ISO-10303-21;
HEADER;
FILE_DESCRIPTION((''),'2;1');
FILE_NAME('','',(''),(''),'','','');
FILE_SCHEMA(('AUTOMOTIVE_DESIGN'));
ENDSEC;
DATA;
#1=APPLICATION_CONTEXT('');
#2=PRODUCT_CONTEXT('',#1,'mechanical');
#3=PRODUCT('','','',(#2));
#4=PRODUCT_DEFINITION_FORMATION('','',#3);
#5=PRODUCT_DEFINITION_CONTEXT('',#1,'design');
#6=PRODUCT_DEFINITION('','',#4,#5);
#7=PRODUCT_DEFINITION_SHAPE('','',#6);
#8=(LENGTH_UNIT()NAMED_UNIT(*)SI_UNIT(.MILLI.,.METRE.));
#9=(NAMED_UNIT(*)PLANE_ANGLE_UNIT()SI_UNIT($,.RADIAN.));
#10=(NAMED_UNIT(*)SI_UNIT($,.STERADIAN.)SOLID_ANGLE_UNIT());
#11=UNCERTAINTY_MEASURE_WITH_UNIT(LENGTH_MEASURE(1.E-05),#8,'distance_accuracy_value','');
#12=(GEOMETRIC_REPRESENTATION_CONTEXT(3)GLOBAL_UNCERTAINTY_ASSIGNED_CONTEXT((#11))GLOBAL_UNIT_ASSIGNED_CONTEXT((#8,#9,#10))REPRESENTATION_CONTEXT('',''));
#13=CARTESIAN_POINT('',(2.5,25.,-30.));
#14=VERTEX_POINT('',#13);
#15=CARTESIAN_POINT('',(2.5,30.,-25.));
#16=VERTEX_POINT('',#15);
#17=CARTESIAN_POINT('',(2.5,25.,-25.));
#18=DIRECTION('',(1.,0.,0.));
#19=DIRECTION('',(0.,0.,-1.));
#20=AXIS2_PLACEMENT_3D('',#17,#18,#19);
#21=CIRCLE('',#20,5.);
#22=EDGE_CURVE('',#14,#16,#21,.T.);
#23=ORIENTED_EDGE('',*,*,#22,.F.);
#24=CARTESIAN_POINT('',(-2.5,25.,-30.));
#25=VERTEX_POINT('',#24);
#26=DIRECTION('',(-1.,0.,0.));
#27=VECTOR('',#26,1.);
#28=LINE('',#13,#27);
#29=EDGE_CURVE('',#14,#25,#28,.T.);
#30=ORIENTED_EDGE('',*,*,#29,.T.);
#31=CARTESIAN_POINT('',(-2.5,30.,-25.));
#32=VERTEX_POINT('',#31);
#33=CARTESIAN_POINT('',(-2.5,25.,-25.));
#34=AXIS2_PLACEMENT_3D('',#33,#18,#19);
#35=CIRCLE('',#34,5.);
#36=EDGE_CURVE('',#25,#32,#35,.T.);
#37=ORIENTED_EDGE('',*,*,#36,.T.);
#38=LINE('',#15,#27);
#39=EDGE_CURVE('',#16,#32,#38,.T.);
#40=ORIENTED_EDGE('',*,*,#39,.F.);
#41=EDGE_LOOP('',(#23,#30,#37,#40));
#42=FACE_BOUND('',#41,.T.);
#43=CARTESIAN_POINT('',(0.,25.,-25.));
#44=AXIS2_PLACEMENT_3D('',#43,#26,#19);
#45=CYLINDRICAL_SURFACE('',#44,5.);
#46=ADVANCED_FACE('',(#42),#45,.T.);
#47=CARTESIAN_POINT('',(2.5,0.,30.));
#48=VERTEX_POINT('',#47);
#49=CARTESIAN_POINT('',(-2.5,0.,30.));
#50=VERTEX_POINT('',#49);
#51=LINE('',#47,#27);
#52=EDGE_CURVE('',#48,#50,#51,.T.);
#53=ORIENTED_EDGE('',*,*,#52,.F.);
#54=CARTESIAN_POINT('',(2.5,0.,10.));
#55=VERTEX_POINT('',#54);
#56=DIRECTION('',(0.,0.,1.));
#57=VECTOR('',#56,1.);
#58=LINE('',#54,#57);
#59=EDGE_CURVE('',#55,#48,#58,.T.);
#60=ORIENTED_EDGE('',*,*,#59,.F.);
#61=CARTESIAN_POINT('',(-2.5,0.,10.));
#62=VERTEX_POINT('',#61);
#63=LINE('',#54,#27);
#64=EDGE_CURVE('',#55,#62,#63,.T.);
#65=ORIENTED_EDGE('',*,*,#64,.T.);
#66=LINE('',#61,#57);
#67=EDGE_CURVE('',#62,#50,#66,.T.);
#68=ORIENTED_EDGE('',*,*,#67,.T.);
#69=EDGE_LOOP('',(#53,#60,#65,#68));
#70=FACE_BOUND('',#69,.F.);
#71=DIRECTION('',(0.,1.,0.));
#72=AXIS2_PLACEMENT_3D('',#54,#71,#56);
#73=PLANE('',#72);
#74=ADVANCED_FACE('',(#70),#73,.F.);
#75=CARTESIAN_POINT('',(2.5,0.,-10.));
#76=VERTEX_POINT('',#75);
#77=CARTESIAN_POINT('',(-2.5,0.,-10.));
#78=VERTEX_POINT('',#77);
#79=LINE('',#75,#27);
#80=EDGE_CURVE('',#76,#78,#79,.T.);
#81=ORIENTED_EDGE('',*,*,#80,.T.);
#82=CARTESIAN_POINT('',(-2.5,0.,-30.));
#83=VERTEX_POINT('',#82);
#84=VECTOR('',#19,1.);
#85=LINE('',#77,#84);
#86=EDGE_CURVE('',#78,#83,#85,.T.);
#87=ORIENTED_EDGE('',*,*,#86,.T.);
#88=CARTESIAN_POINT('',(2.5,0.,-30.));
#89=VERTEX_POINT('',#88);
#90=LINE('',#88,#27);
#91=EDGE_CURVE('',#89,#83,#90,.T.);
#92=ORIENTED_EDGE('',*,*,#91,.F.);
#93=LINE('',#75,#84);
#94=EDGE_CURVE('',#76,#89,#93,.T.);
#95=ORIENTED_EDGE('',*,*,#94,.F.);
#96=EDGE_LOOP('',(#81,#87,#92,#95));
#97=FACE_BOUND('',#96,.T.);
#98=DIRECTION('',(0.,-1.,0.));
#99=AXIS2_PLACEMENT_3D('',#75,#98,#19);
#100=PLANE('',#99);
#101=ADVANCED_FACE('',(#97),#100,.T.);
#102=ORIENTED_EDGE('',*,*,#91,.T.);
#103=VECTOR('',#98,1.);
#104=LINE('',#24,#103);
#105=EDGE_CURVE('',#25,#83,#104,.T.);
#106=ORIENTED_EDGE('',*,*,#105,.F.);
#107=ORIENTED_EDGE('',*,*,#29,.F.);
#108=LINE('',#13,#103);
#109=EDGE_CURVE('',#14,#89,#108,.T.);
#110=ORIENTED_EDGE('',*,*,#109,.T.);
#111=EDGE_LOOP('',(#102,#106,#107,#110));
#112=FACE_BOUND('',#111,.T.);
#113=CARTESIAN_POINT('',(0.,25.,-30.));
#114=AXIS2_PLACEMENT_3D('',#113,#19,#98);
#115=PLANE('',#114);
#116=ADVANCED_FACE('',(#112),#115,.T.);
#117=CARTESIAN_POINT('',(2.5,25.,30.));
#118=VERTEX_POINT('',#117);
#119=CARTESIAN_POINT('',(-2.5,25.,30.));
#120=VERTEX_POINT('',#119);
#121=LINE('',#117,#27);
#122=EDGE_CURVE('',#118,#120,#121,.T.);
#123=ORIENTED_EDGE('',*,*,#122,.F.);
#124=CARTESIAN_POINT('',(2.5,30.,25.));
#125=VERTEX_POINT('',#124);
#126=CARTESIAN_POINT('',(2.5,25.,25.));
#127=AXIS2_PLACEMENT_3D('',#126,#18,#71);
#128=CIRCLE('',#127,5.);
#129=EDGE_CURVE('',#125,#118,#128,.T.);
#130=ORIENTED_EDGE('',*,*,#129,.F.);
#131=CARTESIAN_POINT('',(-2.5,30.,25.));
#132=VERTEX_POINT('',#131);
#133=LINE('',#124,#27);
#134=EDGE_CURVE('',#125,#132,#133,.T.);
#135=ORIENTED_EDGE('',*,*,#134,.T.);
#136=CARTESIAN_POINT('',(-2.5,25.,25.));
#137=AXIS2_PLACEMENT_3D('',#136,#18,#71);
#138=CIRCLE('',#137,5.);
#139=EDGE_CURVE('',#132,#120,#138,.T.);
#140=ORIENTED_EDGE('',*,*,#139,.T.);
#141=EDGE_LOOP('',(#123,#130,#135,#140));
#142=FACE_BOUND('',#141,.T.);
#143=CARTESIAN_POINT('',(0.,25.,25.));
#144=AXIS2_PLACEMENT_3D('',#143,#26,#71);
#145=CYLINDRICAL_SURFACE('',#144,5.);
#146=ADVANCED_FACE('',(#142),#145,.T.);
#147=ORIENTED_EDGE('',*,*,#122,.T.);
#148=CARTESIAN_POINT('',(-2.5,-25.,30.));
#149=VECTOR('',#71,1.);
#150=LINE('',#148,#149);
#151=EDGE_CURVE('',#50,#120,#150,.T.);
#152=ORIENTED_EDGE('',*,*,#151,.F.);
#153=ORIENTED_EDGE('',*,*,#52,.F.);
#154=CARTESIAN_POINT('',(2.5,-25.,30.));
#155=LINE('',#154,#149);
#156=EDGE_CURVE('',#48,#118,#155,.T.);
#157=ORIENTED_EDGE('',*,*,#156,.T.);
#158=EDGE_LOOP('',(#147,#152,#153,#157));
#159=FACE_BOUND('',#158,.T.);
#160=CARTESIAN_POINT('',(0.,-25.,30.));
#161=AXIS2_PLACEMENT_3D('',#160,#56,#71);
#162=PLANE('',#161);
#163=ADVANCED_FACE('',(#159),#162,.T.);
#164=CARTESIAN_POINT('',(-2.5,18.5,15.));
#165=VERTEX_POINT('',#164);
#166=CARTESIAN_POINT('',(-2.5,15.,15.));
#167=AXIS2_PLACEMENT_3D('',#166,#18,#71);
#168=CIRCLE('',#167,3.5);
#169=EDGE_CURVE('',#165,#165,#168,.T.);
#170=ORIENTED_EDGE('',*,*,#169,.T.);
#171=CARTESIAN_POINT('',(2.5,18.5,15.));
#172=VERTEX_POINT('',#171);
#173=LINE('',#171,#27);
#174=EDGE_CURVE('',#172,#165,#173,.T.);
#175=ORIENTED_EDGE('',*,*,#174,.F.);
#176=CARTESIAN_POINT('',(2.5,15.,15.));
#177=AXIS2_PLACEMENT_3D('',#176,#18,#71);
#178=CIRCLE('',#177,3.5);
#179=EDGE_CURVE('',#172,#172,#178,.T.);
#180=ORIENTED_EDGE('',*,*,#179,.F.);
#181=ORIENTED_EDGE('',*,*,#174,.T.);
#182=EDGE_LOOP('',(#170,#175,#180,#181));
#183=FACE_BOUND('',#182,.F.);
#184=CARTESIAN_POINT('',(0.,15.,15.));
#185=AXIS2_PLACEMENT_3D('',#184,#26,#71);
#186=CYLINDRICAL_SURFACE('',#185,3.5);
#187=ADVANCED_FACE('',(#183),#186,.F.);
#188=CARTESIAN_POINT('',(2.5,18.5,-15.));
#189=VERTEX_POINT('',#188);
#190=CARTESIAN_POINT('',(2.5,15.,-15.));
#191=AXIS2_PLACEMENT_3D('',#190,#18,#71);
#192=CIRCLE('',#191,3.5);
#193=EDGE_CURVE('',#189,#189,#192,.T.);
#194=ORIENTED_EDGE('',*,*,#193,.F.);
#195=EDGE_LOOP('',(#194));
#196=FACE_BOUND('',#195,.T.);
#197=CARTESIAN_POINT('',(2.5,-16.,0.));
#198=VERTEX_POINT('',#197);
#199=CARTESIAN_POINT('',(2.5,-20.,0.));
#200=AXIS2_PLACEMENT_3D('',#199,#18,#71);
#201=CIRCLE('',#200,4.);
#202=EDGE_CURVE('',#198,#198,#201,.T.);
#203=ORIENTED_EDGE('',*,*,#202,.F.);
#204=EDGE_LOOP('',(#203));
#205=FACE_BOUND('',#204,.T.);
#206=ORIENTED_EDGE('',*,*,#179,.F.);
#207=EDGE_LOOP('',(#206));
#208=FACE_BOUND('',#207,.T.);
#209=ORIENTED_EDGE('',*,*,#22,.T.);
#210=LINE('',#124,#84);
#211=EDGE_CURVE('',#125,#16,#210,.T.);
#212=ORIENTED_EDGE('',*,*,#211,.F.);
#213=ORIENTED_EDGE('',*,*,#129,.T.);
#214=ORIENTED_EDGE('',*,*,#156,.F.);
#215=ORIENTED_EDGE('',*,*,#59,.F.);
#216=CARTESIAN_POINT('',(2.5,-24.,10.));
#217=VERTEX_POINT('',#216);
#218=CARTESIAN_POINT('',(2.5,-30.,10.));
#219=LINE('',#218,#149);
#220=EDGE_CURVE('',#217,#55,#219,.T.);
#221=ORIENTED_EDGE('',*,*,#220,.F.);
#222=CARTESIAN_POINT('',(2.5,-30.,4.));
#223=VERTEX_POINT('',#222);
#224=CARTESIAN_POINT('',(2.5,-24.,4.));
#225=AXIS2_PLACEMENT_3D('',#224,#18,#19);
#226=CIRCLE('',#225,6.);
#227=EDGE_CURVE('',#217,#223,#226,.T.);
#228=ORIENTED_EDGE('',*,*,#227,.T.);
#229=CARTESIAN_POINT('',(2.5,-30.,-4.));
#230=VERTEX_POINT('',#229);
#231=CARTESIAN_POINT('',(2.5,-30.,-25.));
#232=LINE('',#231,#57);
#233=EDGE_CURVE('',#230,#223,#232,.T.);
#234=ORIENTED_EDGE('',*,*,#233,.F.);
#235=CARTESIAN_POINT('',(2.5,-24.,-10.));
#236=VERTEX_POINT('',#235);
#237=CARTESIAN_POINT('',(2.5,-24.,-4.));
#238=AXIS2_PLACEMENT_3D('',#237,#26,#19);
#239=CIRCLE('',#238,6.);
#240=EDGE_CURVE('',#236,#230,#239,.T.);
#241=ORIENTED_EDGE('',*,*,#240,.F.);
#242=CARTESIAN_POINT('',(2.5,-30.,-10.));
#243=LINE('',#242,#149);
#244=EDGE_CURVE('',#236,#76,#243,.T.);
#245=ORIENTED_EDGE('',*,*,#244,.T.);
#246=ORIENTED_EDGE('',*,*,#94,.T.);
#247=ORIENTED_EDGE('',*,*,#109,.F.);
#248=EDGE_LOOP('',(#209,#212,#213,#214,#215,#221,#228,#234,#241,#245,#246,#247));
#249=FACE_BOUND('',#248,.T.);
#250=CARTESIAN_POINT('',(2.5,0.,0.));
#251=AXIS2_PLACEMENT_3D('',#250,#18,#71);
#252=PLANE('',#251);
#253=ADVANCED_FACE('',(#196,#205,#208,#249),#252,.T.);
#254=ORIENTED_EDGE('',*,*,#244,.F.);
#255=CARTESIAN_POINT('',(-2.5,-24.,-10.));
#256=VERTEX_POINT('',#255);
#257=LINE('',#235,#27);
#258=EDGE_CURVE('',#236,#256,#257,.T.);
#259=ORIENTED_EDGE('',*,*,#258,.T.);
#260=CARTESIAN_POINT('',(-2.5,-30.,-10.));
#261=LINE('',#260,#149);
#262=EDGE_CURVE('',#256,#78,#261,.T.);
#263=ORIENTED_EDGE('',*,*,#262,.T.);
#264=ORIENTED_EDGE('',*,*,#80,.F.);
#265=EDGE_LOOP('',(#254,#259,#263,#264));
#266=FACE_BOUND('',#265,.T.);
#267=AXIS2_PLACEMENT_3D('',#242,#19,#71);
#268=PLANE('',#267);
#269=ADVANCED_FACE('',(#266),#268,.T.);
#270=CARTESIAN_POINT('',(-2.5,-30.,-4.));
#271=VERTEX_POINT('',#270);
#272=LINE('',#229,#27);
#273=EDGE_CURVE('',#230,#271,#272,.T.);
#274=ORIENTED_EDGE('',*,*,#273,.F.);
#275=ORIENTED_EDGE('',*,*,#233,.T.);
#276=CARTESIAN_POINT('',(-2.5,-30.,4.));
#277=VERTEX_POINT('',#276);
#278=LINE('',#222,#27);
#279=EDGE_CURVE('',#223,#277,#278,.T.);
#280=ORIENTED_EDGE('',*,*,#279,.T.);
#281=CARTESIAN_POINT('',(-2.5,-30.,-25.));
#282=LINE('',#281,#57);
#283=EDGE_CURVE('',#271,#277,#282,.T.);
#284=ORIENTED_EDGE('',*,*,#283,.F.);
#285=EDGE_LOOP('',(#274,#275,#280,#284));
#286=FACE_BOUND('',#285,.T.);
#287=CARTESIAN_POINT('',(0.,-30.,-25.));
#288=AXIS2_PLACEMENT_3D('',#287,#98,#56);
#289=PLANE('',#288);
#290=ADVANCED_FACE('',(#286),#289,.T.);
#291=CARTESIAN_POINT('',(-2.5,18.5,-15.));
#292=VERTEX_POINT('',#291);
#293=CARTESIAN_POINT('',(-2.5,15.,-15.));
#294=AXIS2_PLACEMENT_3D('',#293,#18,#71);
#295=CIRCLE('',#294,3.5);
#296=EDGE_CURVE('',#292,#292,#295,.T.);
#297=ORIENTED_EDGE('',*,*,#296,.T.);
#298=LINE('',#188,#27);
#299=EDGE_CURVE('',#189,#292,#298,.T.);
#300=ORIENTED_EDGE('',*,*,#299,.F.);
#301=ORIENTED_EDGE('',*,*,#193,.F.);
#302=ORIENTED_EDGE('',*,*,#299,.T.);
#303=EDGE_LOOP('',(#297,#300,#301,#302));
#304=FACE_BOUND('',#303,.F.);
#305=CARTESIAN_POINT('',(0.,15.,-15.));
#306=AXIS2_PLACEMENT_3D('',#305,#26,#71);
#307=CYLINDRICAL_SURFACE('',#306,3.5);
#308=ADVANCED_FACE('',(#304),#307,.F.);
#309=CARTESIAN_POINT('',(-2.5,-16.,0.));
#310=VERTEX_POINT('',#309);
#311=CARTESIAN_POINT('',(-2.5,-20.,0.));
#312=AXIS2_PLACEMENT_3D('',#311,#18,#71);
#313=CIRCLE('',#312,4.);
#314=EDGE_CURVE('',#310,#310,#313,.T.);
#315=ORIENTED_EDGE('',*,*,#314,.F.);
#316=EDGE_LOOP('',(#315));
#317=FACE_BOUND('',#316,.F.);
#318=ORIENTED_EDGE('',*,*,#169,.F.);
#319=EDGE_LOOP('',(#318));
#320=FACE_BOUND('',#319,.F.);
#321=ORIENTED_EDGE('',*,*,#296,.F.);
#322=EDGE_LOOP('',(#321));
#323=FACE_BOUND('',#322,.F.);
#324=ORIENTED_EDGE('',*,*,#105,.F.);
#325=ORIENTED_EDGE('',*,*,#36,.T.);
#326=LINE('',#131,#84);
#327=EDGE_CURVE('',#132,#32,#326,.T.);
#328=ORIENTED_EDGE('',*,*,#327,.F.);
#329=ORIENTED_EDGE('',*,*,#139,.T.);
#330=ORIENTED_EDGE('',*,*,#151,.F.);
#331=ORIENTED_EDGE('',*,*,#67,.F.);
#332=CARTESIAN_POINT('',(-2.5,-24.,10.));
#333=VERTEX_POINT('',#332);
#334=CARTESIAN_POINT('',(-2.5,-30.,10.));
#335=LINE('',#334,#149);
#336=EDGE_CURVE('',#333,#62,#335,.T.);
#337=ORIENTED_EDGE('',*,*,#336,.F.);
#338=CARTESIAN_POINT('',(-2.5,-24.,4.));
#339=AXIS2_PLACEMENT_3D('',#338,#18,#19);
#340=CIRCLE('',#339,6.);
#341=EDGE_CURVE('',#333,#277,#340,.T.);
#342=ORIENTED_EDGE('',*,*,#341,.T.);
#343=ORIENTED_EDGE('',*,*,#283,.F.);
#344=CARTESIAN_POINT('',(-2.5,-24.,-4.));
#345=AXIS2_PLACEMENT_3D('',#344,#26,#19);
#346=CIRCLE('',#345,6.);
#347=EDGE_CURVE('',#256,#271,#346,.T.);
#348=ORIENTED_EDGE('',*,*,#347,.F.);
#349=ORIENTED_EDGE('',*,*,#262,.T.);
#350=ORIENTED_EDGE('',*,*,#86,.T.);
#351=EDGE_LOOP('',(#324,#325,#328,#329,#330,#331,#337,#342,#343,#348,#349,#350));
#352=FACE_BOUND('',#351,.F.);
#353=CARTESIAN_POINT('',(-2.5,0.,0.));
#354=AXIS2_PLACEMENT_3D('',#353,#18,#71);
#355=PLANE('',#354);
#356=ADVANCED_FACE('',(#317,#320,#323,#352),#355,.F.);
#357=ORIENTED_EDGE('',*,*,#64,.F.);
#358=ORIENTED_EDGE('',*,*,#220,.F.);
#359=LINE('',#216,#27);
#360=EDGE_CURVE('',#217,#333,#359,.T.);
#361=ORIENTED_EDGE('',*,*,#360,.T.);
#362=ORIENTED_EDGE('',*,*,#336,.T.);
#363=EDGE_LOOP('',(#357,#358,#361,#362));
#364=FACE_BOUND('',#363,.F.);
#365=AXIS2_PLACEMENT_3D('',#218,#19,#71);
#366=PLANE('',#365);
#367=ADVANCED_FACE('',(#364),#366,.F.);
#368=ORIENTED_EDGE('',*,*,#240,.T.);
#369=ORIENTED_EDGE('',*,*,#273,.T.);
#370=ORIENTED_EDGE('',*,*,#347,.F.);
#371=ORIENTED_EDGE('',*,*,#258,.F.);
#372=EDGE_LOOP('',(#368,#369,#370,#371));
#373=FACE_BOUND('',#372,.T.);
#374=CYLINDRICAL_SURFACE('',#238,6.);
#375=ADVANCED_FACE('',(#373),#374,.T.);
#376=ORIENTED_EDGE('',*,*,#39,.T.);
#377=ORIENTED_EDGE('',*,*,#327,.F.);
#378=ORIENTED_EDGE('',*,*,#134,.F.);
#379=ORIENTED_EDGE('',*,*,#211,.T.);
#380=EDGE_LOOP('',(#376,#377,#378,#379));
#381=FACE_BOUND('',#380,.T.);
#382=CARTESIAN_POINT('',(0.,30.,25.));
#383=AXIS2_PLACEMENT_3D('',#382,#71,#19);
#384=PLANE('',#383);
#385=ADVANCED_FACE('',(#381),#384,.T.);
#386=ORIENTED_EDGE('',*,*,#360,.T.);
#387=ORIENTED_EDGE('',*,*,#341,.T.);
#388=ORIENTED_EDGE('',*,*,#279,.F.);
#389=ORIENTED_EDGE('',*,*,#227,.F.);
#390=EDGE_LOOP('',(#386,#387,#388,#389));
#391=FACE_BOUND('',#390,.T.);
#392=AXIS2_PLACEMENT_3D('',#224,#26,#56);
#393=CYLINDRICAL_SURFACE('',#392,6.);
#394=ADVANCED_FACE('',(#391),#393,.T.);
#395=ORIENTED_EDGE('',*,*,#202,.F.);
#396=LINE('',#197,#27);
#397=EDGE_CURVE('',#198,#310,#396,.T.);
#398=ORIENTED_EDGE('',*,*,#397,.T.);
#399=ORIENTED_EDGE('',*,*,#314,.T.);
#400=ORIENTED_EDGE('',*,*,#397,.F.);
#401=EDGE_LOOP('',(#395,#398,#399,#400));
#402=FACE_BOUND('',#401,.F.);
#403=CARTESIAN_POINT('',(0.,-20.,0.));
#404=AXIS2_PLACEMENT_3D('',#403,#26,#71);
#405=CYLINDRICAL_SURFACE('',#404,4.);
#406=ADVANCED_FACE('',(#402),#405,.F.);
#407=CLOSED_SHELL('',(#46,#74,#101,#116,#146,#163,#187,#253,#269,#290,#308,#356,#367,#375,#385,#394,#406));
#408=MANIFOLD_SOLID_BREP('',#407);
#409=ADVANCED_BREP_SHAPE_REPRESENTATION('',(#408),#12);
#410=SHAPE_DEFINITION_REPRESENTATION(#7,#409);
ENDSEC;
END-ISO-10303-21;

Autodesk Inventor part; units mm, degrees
ref_plane "YZ Plane" through (0, 0, 0) normal (1, 0, 0) x (0, 1, 0)
ref_plane "XZ Plane" through (0, 0, 0) normal (0, 1, 0) x (-1, 0, 0)
ref_plane "XY Plane" through (0, 0, 0) normal (0, 0, 1) x (1, 0, 0)
sketch "Sketch1" plane through (0, 0, 0) normal (1, 0, 0) x (0, 1, 0)
  line L0 (-25, 30) -> (25, 30)
  line L1 (30, 25) -> (30, -25)
  line L2 (25, -30) -> (-25, -30)
  line L3 (-30, -25) -> (-30, 25)
  line L4 (-30, 30) -> (30, -30) construction
  line L5 (30, 30) -> (-30, -30) construction
  arc A0 (-25, 30) -> (-30, 25) centre (-25, 25) ccw
  arc A1 (-30, -25) -> (-25, -30) centre (-25, -25) ccw
  arc A2 (25, -30) -> (30, -25) centre (25, -25) ccw
  arc A3 (30, 25) -> (25, 30) centre (25, 25) ccw
  circle A4 centre (-20, 0) radius 4
  circle A5 centre (15, 15) radius 3.5
  circle A6 centre (15, -15) radius 3.5
  point P0 (0, 0)
  dimension "d0" = 60
  dimension "d1" = 60
  dimension "d6" = 5
  dimension "d7" = 8
  dimension "d10" = 15
  dimension "d11" = 30
  dimension "d12" = 15
  dimension "d13" = 7
  dimension "d14" = 35
extrude "Plate1" add sketch "Sketch1" along normal mid plane 5
sketch "Sketch2" plane through (2.5, 0, 0) normal (1, 0, 0) x (0, 0, -1)
  line L0 (-30, -30) -> (-10, -30)
  line L1 (-10, -30) -> (-10, 0)
  line L2 (-10, 0) -> (-30, 0)
  line L3 (-30, 0) -> (-30, -30)
  line L4 (30, -30) -> (10, -30)
  line L5 (10, -30) -> (10, 0)
  line L6 (10, 0) -> (30, 0)
  line L7 (30, 0) -> (30, -30)
  circle A0 centre (-15, 15) radius 3.5 projected
  circle A1 centre (0, -20) radius 4 projected
  line L8 (-30, -25) -> (-30, 25) construction
  point P0 (0, 0)
  dimension "d15" = 15
  dimension "d17" = 10
  dimension "d18" = 10
  dimension "d19" = 30
extrude "Cut1" cut sketch "Sketch2" against normal blind 5 contours L3 L2 L1 L0 | L4 L5 L6 L7
fillet "Corner Round1" radius 6 2 edges at (0, -30, 10) (0, -30, -10)
equation "\"d20\" = Thickness"
equation "\"d9\" = Thickness"
equation "\"BendRadius\" = Thickness"
equation "\"BendReliefWidth\" = Thickness"
equation "\"BendReliefDepth\" = 0.5 * Thickness"
equation "\"TransitionRadius\" = BendRadius"
equation "\"JacobiRadiusSize\" = BendRadius"
equation "\"GapSize\" = Thickness"
equation "\"Thickness\" = 5"
properties part number "HCMUTE-CDT23-BAT_CANG_BANG_TAI" material "Stainless Steel"
